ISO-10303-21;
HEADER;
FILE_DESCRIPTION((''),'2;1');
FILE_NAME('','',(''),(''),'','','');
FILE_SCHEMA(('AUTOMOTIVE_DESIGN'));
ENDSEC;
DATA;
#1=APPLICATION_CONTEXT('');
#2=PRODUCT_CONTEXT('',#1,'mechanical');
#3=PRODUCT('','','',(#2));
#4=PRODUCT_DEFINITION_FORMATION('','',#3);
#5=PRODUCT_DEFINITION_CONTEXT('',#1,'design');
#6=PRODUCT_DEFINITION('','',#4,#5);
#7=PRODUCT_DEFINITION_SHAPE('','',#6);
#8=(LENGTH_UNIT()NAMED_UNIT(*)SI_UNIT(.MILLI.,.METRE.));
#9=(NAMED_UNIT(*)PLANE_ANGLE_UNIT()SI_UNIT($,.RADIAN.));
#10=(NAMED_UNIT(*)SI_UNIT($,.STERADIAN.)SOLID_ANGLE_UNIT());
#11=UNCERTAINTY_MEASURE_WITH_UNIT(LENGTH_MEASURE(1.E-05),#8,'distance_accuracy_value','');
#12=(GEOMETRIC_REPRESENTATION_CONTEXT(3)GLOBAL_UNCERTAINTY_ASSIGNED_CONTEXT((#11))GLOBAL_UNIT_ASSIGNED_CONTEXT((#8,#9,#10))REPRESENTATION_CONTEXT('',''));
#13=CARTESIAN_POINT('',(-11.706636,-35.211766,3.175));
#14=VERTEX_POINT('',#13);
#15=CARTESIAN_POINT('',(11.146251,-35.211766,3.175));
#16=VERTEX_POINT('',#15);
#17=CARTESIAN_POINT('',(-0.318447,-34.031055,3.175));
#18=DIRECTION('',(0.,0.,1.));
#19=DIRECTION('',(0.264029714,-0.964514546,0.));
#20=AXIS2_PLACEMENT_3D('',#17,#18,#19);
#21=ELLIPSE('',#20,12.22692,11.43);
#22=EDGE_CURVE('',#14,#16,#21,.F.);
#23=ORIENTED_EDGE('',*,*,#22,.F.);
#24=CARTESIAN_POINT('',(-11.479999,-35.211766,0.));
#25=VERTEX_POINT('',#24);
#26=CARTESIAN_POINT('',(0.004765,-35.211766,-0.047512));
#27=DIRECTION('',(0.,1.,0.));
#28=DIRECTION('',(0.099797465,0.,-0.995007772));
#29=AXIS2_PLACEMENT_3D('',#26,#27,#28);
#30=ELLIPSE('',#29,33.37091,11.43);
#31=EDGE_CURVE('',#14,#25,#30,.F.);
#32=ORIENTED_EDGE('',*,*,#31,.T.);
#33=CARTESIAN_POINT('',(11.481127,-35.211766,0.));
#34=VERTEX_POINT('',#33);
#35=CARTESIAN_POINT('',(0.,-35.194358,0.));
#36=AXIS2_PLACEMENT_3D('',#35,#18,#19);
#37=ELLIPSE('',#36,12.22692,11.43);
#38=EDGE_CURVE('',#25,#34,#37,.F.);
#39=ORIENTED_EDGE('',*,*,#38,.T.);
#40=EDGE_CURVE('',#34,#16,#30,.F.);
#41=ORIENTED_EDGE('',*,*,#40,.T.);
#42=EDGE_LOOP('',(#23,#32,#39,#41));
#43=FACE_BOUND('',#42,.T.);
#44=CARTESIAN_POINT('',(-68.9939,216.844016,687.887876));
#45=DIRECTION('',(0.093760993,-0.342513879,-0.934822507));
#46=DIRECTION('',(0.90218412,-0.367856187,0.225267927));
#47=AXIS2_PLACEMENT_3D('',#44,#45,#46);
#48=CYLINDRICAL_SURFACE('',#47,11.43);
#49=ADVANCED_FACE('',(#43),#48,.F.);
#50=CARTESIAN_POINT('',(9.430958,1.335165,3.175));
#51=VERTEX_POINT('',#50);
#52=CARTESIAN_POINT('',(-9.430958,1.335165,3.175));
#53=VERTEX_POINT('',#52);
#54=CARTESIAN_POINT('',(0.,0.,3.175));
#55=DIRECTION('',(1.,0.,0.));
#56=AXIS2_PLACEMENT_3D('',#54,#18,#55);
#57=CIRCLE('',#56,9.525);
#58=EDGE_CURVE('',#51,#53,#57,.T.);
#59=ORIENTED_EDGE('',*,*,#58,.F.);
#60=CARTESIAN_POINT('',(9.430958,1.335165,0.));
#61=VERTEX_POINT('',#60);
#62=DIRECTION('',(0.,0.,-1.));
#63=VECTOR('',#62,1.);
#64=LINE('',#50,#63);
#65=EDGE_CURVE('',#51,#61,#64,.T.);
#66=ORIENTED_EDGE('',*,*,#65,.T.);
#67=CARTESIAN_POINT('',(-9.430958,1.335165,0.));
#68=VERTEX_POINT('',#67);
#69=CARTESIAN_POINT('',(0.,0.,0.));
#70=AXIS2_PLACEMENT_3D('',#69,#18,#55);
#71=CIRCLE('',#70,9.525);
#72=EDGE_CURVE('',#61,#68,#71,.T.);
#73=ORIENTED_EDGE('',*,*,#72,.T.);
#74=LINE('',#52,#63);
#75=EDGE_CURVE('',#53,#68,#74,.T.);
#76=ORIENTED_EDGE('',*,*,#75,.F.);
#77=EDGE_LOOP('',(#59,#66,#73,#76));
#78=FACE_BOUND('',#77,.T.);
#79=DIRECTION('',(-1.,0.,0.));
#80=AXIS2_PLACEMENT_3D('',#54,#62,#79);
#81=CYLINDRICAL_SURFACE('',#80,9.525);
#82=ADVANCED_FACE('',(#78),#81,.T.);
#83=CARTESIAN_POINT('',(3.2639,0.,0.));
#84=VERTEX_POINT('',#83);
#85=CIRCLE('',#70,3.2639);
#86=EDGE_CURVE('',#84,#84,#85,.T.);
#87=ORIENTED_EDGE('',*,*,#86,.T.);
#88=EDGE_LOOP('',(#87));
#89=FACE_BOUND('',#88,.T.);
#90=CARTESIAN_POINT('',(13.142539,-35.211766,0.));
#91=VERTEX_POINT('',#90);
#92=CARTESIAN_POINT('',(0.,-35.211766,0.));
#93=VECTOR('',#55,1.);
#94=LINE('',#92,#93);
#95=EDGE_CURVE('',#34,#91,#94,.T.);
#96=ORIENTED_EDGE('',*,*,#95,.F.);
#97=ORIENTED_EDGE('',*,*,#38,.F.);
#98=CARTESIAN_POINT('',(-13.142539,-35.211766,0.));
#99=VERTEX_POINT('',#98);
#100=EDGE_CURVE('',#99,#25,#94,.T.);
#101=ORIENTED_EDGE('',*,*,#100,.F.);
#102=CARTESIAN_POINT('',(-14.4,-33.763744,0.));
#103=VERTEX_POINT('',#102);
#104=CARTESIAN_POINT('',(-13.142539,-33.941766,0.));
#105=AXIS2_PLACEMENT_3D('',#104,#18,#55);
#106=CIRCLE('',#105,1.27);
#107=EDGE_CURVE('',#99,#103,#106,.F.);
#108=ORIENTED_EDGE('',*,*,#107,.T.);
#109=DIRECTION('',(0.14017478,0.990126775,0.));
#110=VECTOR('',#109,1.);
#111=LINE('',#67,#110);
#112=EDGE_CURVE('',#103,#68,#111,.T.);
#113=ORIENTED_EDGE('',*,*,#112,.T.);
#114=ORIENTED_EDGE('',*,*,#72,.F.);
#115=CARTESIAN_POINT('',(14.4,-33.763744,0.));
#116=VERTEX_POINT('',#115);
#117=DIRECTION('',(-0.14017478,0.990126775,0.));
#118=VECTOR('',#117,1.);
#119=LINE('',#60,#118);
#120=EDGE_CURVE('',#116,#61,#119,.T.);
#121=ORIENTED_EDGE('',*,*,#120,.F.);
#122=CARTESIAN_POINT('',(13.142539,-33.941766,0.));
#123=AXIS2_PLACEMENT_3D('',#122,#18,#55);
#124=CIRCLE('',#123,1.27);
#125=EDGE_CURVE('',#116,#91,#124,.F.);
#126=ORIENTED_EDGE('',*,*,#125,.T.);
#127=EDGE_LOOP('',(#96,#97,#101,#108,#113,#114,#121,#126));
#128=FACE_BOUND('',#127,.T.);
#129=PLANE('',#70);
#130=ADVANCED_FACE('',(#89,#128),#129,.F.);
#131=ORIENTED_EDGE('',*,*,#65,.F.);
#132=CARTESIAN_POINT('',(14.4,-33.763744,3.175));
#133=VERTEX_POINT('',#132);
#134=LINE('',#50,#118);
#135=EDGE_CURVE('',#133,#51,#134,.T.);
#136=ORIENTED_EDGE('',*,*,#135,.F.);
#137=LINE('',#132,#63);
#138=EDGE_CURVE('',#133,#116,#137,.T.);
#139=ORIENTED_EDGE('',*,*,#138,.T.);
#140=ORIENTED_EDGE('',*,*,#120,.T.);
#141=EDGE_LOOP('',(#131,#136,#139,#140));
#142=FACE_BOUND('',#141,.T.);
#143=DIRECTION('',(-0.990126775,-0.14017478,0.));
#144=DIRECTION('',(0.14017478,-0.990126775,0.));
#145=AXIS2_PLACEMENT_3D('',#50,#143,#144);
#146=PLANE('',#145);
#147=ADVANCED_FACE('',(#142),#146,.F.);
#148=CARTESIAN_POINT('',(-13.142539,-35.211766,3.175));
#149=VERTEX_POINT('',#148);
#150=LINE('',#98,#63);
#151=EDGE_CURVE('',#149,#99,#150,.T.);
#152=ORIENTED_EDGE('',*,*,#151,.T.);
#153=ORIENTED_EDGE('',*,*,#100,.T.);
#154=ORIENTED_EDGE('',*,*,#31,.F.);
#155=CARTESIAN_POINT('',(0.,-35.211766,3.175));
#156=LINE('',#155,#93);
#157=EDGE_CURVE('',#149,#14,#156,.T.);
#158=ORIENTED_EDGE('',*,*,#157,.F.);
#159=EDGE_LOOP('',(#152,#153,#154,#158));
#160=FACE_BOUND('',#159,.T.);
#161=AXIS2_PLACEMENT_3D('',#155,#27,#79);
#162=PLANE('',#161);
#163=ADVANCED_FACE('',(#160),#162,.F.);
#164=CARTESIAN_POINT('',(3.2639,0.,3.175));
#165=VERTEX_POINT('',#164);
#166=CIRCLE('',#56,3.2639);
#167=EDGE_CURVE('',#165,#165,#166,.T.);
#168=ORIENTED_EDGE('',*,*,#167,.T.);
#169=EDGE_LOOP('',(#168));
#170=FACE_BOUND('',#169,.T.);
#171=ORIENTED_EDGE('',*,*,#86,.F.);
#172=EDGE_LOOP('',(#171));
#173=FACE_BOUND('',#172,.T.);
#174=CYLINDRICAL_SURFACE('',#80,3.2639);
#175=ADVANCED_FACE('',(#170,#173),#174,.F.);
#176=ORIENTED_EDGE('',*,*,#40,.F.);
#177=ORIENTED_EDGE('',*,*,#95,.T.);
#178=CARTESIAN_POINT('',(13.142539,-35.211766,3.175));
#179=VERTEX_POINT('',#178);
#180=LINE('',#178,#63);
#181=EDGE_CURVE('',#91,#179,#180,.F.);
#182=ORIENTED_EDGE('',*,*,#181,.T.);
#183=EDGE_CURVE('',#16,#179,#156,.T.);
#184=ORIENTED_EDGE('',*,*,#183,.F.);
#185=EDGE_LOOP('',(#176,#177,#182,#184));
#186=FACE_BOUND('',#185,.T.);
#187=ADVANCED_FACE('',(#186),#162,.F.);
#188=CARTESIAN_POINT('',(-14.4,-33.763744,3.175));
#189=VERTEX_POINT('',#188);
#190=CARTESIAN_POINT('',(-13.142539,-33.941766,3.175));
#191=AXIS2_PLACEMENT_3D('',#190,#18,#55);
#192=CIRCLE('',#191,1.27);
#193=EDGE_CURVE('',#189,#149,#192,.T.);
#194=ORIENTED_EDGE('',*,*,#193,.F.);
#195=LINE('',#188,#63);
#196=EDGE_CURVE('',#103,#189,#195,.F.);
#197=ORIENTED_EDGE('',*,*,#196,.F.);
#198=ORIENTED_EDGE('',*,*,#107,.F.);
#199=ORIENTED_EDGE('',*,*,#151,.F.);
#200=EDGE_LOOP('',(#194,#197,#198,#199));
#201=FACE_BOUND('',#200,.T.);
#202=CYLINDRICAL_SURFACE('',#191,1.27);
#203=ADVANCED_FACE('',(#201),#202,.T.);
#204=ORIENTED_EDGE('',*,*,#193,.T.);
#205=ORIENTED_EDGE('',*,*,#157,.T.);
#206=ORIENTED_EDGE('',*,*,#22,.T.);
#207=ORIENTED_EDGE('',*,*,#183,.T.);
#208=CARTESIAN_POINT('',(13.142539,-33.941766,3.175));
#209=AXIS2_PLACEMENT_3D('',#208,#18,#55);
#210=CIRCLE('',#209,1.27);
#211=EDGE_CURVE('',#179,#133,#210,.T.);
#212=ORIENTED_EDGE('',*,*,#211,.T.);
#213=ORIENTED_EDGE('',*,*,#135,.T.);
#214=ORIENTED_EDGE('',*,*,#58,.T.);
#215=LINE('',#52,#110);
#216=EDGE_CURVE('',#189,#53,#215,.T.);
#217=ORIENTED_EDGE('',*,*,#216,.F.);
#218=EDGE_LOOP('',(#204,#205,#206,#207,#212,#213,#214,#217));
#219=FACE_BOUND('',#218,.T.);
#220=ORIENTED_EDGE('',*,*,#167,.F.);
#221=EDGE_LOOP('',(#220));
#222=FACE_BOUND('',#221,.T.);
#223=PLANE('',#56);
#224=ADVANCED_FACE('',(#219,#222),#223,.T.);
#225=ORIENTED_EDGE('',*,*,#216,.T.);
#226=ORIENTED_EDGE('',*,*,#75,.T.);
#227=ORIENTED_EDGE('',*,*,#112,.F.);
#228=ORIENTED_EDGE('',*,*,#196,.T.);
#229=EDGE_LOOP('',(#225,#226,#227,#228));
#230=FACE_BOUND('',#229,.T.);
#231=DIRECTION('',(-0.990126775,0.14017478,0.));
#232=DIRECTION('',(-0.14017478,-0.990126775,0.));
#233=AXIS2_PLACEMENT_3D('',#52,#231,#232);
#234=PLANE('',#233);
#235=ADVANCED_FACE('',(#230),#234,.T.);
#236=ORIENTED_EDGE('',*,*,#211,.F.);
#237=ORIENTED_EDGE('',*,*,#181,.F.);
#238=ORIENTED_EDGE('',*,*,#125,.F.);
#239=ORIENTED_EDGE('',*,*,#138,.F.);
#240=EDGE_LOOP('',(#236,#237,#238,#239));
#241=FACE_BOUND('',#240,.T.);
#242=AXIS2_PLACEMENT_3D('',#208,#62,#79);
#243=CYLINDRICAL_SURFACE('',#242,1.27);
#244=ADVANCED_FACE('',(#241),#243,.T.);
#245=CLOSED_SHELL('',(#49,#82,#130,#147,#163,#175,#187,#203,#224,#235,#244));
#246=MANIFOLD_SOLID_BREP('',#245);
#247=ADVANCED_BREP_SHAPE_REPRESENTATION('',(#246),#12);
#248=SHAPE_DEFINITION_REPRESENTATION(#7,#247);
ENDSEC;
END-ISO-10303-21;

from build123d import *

# Parameters (mm, degrees)
SKETCH1_R           = 3.2639
BOSS_EXTRUDE1_DEPTH = 3.175
CAVITY1_OUTLINE_W   = 11.43
CAVITY1_OUTLINE_H   = 8.831388176
FILLET3_R           = 1.27


# Read off the part's stored shape, not the designer's step: Cavity1
with BuildPart() as part:
    # Sketch1 → Boss-Extrude1 (new body)
    with BuildSketch(Plane.XY):
        with BuildLine():
            ThreePointArc((9.430957534, 1.335164779), (0, 9.525), (-9.430957534, 1.335164779))
            Line((-9.430957534, 1.335164779), (-14.605, -35.211766))
            Line((-14.605, -35.211766), (14.605, -35.211766))
            Line((14.605, -35.211766), (9.430957534, 1.335164779))
        make_face()
        Circle(SKETCH1_R, mode=Mode.SUBTRACT)
    extrude(amount=BOSS_EXTRUDE1_DEPTH)

    # Cavity1 outline → Cavity1 (revolve, cut)
    with BuildSketch(Plane(origin=(-1.130247142, -31.06550514, 11.268870294), x_dir=(0.995594734936216, 0.03225653994771549, 0.08803771576936452), z_dir=(0, 0.9389588693345029, -0.34402941981474794))):
        with Locations((5.715, 8.721306361)):
            Rectangle(CAVITY1_OUTLINE_W, CAVITY1_OUTLINE_H)
    revolve(axis=Axis((-1.130247142, -31.06550514, 11.268870294), (0.09376099278103864, -0.34251387903072417, -0.9348225066310935)), mode=Mode.SUBTRACT)

    # Fillet3
    fillet3_edges = [part.edges().sort_by_distance(p)[0] for p in [
        (-14.605, -35.211766, 1.5875),
        (14.605, -35.211766, 1.5875),
    ]]
    fillet(fillet3_edges, radius=FILLET3_R)


solid = part.part
